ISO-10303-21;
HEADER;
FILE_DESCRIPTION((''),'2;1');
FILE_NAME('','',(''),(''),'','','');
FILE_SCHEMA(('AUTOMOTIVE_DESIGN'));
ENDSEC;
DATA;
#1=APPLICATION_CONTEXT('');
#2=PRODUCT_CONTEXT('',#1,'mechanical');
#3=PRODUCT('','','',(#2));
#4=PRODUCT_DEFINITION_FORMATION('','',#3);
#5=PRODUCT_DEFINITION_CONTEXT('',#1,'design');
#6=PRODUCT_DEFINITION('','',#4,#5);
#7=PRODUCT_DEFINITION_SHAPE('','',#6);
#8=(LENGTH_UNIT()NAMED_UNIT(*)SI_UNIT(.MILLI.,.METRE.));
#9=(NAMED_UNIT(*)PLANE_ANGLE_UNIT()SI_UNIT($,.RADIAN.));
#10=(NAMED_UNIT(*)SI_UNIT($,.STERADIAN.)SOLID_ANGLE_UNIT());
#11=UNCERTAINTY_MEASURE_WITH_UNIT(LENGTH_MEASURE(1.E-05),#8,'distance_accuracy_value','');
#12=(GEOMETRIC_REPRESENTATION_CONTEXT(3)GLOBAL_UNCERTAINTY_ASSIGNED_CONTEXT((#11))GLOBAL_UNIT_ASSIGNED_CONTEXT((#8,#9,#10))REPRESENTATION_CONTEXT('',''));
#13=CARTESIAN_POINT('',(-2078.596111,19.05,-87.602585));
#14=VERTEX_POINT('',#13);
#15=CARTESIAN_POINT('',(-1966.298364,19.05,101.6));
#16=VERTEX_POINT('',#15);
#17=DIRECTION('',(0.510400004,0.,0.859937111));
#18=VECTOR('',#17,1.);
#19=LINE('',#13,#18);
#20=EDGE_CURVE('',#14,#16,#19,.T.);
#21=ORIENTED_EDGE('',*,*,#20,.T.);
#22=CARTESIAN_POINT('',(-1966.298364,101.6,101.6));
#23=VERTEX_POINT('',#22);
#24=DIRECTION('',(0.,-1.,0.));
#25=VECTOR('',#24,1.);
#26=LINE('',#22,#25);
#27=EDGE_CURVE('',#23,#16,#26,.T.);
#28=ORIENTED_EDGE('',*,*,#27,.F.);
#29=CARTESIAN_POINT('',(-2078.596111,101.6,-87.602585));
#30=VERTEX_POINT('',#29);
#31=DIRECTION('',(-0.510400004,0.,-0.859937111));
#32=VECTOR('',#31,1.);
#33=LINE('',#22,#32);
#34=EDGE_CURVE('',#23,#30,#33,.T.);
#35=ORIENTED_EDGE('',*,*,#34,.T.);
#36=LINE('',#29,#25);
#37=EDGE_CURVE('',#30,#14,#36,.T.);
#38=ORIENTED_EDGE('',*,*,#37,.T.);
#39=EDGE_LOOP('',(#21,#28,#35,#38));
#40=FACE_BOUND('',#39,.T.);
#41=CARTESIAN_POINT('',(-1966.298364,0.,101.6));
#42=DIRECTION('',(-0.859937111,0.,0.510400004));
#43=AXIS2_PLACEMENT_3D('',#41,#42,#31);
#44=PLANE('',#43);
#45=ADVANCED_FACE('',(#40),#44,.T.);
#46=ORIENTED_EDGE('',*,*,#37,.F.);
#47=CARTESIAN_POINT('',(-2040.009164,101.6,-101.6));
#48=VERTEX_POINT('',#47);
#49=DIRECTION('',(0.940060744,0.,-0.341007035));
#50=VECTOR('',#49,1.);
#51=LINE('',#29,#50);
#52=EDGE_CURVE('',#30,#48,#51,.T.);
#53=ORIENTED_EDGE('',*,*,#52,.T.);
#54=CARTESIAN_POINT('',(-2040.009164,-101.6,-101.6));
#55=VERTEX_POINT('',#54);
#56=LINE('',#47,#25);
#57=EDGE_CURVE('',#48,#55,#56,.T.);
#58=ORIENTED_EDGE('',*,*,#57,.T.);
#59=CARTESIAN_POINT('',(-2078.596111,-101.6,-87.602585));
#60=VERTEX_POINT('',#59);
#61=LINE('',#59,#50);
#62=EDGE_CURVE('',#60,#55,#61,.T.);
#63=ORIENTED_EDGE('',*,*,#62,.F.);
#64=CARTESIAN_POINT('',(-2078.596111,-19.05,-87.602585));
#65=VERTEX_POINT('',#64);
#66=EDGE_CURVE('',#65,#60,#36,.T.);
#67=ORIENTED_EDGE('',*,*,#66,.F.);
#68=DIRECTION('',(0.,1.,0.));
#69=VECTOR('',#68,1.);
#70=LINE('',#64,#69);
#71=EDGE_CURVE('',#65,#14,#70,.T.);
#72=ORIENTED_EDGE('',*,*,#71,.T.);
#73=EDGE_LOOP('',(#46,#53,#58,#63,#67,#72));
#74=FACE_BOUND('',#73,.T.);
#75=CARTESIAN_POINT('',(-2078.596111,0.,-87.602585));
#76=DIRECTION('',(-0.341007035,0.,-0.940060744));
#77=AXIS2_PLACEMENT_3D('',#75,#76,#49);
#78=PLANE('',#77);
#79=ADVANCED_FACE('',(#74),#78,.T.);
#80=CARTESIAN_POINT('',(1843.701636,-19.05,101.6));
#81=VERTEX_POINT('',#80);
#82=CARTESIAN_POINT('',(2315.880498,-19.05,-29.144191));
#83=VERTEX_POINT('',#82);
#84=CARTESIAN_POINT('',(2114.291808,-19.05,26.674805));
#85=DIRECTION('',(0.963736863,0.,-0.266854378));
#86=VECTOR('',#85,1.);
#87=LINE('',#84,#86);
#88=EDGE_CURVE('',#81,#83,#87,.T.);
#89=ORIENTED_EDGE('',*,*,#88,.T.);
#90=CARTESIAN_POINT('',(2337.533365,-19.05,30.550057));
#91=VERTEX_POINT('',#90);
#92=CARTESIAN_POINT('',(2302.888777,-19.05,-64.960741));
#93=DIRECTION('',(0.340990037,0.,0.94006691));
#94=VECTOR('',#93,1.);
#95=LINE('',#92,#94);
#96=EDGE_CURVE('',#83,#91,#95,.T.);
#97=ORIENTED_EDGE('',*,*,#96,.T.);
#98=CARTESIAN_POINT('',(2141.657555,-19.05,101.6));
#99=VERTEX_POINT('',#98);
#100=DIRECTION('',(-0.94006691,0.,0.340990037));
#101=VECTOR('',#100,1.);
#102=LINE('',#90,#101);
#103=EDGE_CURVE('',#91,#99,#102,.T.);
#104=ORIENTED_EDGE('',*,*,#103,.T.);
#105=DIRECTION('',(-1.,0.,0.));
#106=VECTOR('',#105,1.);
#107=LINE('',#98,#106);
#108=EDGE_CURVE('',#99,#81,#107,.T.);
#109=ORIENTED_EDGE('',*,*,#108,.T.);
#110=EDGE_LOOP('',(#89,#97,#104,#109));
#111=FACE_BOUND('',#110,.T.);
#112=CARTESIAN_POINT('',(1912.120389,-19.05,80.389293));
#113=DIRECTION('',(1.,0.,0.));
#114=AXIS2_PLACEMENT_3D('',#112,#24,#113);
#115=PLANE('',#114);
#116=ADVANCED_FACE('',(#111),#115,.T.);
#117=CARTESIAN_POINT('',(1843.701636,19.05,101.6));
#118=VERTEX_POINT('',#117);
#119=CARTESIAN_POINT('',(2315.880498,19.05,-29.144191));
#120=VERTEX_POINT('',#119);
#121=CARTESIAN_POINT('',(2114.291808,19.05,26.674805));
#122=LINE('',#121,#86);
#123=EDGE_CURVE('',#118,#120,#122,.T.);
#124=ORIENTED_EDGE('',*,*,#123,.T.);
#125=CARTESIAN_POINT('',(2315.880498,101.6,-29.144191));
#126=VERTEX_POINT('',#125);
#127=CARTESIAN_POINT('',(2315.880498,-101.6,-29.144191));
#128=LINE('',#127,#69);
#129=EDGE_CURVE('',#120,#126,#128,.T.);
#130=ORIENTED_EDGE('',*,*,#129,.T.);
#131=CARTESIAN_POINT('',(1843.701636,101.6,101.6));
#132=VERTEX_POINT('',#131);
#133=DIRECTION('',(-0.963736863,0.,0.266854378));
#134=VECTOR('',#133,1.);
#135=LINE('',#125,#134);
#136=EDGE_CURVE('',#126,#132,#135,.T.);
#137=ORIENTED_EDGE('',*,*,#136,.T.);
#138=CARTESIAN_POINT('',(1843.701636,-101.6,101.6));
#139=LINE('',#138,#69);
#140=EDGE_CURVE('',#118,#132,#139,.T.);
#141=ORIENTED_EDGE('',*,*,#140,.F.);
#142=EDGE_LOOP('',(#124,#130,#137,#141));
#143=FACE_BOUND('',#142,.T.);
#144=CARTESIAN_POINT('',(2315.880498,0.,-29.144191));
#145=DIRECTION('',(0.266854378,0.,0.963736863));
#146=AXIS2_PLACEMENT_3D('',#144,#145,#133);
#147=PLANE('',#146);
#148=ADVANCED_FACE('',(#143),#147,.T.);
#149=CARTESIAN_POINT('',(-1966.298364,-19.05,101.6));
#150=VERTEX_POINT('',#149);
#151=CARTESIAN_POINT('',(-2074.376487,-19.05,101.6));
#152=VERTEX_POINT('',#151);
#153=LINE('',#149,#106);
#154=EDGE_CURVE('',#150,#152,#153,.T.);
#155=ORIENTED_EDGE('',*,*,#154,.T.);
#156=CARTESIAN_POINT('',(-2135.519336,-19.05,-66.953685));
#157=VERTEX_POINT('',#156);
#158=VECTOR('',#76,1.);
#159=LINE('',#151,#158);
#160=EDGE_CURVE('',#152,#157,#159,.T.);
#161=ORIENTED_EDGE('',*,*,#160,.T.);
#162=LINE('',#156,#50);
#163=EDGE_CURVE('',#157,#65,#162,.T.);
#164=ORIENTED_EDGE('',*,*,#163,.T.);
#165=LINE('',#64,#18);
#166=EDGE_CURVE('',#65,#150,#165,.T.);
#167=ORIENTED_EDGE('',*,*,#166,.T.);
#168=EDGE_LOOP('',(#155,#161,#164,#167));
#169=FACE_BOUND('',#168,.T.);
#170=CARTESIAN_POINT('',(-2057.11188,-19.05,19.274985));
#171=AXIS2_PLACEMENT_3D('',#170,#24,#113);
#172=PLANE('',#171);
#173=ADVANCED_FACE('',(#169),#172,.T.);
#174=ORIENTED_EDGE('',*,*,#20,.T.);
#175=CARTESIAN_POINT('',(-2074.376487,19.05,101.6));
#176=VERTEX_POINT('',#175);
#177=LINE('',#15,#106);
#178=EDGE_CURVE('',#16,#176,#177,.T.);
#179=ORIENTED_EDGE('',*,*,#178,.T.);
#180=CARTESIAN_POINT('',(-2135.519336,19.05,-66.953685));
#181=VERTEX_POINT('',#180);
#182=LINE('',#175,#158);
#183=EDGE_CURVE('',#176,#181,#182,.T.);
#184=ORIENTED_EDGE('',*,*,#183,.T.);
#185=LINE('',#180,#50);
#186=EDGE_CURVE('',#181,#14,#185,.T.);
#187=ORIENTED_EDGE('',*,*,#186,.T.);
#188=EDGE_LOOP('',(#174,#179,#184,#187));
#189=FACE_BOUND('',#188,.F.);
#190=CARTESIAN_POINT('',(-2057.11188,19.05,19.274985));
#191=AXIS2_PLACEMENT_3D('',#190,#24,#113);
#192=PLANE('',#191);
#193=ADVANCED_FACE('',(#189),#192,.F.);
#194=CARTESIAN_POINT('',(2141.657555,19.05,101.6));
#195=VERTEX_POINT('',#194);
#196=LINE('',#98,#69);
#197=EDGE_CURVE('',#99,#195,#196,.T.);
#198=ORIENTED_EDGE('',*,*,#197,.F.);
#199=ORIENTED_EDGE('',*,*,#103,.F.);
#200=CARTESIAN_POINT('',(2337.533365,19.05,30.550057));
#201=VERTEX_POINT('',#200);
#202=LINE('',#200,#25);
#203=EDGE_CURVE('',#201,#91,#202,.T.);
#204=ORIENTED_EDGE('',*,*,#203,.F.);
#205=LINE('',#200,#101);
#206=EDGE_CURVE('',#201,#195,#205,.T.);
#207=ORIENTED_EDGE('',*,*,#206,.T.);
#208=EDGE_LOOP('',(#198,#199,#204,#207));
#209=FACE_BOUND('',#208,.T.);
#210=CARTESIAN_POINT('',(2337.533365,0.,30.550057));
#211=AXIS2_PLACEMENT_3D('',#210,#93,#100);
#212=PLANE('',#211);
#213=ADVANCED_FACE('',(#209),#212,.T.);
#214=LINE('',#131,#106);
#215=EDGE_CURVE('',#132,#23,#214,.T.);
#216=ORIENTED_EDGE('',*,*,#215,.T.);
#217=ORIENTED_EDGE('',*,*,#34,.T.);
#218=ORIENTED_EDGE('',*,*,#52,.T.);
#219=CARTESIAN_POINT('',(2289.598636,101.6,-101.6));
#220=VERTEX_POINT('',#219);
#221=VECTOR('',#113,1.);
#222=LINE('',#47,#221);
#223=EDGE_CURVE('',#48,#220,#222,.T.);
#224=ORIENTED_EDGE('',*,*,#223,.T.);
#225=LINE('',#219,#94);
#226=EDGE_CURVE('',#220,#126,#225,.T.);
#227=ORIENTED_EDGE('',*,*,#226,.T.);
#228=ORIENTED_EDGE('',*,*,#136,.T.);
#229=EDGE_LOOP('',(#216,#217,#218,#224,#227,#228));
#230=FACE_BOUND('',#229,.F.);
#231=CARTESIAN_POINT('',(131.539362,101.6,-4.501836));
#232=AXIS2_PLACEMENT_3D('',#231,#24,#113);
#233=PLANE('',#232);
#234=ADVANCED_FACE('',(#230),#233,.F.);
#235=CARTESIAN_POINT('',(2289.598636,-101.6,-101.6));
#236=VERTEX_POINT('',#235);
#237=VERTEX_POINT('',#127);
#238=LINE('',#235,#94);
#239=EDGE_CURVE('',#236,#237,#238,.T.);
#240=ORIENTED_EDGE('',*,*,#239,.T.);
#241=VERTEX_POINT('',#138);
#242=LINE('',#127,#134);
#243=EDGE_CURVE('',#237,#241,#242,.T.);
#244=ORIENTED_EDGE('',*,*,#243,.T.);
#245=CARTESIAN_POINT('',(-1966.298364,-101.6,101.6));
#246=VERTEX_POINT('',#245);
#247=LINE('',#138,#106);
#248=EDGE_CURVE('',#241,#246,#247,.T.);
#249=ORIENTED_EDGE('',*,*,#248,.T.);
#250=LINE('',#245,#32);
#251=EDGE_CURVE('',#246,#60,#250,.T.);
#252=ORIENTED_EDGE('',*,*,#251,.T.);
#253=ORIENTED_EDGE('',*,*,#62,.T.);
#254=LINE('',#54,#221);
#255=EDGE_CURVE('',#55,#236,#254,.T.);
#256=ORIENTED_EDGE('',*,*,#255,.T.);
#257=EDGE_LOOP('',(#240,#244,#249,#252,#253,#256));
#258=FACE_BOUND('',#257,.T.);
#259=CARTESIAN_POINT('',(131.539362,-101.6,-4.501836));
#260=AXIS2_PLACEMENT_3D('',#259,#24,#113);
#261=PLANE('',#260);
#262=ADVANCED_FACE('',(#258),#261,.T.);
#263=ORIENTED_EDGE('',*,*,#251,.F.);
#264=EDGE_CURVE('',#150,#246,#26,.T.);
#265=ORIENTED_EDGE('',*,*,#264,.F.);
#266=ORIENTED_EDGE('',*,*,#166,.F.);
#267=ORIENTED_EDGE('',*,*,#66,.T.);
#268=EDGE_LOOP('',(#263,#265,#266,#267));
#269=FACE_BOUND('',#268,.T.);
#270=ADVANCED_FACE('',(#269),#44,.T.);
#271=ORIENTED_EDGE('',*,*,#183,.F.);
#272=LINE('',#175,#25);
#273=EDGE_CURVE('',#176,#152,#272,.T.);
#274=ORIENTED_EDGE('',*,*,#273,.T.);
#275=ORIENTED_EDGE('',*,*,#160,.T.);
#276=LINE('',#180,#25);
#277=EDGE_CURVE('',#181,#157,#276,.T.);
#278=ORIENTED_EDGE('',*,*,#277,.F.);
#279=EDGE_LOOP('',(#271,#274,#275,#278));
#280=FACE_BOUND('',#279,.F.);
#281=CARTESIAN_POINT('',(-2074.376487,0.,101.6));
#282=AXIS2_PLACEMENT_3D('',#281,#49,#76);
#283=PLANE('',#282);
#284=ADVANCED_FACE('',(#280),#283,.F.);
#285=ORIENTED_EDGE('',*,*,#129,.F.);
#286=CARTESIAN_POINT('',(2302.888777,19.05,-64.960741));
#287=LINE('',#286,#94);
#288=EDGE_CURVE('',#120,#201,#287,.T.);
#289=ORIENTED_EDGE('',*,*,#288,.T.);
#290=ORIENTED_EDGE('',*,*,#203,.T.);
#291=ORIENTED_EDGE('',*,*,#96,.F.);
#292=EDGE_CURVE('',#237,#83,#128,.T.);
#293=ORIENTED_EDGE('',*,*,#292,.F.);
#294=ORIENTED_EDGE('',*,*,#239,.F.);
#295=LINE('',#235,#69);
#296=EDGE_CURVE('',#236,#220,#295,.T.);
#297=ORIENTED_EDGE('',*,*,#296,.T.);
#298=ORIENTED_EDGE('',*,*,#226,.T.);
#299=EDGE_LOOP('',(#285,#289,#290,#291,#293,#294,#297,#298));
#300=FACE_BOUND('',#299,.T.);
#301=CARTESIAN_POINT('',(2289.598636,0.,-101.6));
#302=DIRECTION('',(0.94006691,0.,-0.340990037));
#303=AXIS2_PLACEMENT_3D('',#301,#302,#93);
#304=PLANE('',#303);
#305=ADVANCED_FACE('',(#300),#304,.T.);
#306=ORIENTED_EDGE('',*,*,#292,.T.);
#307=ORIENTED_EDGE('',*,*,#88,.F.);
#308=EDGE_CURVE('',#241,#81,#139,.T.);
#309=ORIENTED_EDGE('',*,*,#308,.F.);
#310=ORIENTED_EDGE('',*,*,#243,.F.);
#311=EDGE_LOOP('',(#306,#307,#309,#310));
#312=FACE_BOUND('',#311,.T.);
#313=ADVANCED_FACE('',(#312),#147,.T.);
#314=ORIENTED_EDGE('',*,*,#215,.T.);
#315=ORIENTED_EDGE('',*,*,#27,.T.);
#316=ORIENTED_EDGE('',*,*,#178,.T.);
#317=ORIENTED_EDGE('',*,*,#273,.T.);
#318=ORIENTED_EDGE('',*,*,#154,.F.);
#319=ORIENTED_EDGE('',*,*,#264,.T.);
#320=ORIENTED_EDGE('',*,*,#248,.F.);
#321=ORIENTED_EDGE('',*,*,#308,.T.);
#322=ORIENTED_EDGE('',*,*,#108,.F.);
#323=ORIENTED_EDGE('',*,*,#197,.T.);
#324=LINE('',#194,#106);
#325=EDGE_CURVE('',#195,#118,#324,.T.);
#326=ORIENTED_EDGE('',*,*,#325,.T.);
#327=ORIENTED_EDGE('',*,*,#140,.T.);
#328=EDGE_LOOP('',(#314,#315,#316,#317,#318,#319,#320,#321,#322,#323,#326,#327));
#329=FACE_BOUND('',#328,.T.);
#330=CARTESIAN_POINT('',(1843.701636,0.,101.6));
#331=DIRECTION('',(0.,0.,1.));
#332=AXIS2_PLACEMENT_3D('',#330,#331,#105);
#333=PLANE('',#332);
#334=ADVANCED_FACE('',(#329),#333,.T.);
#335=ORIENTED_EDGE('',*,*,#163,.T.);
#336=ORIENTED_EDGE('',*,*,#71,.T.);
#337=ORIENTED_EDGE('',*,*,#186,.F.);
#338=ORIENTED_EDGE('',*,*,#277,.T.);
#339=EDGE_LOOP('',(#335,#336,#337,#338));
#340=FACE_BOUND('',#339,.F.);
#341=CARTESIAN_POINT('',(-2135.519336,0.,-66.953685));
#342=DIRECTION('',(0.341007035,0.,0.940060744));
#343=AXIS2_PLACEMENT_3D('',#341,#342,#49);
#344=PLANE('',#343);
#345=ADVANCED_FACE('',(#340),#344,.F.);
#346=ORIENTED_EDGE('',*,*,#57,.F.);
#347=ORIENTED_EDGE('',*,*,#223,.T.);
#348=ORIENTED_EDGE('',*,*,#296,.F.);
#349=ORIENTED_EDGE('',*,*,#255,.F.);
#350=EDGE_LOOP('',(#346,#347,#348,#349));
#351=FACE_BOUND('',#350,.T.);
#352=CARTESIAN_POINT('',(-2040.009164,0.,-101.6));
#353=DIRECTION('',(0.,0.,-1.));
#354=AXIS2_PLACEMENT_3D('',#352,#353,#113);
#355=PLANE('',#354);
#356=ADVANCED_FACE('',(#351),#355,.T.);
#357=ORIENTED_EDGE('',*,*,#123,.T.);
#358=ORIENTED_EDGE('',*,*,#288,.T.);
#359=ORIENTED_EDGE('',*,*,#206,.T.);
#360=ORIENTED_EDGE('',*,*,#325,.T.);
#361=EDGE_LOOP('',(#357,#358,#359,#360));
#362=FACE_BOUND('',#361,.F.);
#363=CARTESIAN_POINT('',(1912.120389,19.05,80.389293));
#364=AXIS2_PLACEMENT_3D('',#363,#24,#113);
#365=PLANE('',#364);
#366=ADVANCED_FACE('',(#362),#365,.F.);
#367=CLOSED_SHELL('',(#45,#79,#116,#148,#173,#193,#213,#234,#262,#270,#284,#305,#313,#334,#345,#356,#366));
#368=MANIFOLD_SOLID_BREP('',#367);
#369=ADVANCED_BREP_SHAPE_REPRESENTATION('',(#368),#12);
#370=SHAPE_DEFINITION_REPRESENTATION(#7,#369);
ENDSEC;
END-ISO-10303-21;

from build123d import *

# Parameters (mm, degrees)
F1_DEPTH = 101.6
F2_DEPTH = 19.05


with BuildPart() as f1:
    # F0 (on Front) → F1 (new body, symmetric)
    with BuildSketch(Plane.XZ):
        Polygon((1843.7016355094, 101.6), (-1966.2983644906, 101.6), (-1966.2983644906, -101.6), (2289.5986355094, -101.6), (2302.8887772145, -64.9607405868), (1948.7385730094, 63.5), (1909.5294683228, 77.7223004984), align=None)
        Polygon((-1966.2983644906, -101.6), (-1966.2983644906, 101.6), (-2040.0091644906, -101.6), align=None)
        Polygon((-2040.0091644906, -101.6), (-1966.2983644906, 101.6), (-2078.5961114712, -87.6025849828), align=None)
        Polygon((2315.8804976416, -29.1441913344), (1981.2986825646, 63.5), (1948.7385730094, 63.5), (2302.8887772145, -64.9607405868), align=None)
        Polygon((1981.2986825646, 63.5), (1843.7016355094, 101.6), (1909.5294683228, 77.7223004984), (1948.7385730094, 63.5), align=None)
    extrude(amount=F1_DEPTH, both=True)

    # F0 (on Front) → F2 (join, symmetric)
    with BuildSketch(Plane.XZ):
        Polygon((-1966.2983644906, 101.6), (-2074.3764867409, 101.6), (-2135.519336069, -66.9536852599), (-2078.5961114712, -87.6025849828), align=None)
        Polygon((1981.2986825646, 63.5), (1843.7016355094, 101.6), (1909.5294683228, 77.7223004984), (1948.7385730094, 63.5), align=None)
        Polygon((1918.1906152742, 101.6), (1843.7016355094, 101.6), (1981.2986825646, 63.5), (2246.6944920684, 63.5), (2141.6575545684, 101.6), align=None)
        Polygon((2315.8804976416, -29.1441913344), (1981.2986825646, 63.5), (1948.7385730094, 63.5), (2302.8887772145, -64.9607405868), align=None)
        Polygon((2246.6944920684, 63.5), (1981.2986825646, 63.5), (2315.8804976416, -29.1441913344), (2337.53336502, 30.5500574195), align=None)
    extrude(amount=F2_DEPTH, both=True)


solid = f1.part
